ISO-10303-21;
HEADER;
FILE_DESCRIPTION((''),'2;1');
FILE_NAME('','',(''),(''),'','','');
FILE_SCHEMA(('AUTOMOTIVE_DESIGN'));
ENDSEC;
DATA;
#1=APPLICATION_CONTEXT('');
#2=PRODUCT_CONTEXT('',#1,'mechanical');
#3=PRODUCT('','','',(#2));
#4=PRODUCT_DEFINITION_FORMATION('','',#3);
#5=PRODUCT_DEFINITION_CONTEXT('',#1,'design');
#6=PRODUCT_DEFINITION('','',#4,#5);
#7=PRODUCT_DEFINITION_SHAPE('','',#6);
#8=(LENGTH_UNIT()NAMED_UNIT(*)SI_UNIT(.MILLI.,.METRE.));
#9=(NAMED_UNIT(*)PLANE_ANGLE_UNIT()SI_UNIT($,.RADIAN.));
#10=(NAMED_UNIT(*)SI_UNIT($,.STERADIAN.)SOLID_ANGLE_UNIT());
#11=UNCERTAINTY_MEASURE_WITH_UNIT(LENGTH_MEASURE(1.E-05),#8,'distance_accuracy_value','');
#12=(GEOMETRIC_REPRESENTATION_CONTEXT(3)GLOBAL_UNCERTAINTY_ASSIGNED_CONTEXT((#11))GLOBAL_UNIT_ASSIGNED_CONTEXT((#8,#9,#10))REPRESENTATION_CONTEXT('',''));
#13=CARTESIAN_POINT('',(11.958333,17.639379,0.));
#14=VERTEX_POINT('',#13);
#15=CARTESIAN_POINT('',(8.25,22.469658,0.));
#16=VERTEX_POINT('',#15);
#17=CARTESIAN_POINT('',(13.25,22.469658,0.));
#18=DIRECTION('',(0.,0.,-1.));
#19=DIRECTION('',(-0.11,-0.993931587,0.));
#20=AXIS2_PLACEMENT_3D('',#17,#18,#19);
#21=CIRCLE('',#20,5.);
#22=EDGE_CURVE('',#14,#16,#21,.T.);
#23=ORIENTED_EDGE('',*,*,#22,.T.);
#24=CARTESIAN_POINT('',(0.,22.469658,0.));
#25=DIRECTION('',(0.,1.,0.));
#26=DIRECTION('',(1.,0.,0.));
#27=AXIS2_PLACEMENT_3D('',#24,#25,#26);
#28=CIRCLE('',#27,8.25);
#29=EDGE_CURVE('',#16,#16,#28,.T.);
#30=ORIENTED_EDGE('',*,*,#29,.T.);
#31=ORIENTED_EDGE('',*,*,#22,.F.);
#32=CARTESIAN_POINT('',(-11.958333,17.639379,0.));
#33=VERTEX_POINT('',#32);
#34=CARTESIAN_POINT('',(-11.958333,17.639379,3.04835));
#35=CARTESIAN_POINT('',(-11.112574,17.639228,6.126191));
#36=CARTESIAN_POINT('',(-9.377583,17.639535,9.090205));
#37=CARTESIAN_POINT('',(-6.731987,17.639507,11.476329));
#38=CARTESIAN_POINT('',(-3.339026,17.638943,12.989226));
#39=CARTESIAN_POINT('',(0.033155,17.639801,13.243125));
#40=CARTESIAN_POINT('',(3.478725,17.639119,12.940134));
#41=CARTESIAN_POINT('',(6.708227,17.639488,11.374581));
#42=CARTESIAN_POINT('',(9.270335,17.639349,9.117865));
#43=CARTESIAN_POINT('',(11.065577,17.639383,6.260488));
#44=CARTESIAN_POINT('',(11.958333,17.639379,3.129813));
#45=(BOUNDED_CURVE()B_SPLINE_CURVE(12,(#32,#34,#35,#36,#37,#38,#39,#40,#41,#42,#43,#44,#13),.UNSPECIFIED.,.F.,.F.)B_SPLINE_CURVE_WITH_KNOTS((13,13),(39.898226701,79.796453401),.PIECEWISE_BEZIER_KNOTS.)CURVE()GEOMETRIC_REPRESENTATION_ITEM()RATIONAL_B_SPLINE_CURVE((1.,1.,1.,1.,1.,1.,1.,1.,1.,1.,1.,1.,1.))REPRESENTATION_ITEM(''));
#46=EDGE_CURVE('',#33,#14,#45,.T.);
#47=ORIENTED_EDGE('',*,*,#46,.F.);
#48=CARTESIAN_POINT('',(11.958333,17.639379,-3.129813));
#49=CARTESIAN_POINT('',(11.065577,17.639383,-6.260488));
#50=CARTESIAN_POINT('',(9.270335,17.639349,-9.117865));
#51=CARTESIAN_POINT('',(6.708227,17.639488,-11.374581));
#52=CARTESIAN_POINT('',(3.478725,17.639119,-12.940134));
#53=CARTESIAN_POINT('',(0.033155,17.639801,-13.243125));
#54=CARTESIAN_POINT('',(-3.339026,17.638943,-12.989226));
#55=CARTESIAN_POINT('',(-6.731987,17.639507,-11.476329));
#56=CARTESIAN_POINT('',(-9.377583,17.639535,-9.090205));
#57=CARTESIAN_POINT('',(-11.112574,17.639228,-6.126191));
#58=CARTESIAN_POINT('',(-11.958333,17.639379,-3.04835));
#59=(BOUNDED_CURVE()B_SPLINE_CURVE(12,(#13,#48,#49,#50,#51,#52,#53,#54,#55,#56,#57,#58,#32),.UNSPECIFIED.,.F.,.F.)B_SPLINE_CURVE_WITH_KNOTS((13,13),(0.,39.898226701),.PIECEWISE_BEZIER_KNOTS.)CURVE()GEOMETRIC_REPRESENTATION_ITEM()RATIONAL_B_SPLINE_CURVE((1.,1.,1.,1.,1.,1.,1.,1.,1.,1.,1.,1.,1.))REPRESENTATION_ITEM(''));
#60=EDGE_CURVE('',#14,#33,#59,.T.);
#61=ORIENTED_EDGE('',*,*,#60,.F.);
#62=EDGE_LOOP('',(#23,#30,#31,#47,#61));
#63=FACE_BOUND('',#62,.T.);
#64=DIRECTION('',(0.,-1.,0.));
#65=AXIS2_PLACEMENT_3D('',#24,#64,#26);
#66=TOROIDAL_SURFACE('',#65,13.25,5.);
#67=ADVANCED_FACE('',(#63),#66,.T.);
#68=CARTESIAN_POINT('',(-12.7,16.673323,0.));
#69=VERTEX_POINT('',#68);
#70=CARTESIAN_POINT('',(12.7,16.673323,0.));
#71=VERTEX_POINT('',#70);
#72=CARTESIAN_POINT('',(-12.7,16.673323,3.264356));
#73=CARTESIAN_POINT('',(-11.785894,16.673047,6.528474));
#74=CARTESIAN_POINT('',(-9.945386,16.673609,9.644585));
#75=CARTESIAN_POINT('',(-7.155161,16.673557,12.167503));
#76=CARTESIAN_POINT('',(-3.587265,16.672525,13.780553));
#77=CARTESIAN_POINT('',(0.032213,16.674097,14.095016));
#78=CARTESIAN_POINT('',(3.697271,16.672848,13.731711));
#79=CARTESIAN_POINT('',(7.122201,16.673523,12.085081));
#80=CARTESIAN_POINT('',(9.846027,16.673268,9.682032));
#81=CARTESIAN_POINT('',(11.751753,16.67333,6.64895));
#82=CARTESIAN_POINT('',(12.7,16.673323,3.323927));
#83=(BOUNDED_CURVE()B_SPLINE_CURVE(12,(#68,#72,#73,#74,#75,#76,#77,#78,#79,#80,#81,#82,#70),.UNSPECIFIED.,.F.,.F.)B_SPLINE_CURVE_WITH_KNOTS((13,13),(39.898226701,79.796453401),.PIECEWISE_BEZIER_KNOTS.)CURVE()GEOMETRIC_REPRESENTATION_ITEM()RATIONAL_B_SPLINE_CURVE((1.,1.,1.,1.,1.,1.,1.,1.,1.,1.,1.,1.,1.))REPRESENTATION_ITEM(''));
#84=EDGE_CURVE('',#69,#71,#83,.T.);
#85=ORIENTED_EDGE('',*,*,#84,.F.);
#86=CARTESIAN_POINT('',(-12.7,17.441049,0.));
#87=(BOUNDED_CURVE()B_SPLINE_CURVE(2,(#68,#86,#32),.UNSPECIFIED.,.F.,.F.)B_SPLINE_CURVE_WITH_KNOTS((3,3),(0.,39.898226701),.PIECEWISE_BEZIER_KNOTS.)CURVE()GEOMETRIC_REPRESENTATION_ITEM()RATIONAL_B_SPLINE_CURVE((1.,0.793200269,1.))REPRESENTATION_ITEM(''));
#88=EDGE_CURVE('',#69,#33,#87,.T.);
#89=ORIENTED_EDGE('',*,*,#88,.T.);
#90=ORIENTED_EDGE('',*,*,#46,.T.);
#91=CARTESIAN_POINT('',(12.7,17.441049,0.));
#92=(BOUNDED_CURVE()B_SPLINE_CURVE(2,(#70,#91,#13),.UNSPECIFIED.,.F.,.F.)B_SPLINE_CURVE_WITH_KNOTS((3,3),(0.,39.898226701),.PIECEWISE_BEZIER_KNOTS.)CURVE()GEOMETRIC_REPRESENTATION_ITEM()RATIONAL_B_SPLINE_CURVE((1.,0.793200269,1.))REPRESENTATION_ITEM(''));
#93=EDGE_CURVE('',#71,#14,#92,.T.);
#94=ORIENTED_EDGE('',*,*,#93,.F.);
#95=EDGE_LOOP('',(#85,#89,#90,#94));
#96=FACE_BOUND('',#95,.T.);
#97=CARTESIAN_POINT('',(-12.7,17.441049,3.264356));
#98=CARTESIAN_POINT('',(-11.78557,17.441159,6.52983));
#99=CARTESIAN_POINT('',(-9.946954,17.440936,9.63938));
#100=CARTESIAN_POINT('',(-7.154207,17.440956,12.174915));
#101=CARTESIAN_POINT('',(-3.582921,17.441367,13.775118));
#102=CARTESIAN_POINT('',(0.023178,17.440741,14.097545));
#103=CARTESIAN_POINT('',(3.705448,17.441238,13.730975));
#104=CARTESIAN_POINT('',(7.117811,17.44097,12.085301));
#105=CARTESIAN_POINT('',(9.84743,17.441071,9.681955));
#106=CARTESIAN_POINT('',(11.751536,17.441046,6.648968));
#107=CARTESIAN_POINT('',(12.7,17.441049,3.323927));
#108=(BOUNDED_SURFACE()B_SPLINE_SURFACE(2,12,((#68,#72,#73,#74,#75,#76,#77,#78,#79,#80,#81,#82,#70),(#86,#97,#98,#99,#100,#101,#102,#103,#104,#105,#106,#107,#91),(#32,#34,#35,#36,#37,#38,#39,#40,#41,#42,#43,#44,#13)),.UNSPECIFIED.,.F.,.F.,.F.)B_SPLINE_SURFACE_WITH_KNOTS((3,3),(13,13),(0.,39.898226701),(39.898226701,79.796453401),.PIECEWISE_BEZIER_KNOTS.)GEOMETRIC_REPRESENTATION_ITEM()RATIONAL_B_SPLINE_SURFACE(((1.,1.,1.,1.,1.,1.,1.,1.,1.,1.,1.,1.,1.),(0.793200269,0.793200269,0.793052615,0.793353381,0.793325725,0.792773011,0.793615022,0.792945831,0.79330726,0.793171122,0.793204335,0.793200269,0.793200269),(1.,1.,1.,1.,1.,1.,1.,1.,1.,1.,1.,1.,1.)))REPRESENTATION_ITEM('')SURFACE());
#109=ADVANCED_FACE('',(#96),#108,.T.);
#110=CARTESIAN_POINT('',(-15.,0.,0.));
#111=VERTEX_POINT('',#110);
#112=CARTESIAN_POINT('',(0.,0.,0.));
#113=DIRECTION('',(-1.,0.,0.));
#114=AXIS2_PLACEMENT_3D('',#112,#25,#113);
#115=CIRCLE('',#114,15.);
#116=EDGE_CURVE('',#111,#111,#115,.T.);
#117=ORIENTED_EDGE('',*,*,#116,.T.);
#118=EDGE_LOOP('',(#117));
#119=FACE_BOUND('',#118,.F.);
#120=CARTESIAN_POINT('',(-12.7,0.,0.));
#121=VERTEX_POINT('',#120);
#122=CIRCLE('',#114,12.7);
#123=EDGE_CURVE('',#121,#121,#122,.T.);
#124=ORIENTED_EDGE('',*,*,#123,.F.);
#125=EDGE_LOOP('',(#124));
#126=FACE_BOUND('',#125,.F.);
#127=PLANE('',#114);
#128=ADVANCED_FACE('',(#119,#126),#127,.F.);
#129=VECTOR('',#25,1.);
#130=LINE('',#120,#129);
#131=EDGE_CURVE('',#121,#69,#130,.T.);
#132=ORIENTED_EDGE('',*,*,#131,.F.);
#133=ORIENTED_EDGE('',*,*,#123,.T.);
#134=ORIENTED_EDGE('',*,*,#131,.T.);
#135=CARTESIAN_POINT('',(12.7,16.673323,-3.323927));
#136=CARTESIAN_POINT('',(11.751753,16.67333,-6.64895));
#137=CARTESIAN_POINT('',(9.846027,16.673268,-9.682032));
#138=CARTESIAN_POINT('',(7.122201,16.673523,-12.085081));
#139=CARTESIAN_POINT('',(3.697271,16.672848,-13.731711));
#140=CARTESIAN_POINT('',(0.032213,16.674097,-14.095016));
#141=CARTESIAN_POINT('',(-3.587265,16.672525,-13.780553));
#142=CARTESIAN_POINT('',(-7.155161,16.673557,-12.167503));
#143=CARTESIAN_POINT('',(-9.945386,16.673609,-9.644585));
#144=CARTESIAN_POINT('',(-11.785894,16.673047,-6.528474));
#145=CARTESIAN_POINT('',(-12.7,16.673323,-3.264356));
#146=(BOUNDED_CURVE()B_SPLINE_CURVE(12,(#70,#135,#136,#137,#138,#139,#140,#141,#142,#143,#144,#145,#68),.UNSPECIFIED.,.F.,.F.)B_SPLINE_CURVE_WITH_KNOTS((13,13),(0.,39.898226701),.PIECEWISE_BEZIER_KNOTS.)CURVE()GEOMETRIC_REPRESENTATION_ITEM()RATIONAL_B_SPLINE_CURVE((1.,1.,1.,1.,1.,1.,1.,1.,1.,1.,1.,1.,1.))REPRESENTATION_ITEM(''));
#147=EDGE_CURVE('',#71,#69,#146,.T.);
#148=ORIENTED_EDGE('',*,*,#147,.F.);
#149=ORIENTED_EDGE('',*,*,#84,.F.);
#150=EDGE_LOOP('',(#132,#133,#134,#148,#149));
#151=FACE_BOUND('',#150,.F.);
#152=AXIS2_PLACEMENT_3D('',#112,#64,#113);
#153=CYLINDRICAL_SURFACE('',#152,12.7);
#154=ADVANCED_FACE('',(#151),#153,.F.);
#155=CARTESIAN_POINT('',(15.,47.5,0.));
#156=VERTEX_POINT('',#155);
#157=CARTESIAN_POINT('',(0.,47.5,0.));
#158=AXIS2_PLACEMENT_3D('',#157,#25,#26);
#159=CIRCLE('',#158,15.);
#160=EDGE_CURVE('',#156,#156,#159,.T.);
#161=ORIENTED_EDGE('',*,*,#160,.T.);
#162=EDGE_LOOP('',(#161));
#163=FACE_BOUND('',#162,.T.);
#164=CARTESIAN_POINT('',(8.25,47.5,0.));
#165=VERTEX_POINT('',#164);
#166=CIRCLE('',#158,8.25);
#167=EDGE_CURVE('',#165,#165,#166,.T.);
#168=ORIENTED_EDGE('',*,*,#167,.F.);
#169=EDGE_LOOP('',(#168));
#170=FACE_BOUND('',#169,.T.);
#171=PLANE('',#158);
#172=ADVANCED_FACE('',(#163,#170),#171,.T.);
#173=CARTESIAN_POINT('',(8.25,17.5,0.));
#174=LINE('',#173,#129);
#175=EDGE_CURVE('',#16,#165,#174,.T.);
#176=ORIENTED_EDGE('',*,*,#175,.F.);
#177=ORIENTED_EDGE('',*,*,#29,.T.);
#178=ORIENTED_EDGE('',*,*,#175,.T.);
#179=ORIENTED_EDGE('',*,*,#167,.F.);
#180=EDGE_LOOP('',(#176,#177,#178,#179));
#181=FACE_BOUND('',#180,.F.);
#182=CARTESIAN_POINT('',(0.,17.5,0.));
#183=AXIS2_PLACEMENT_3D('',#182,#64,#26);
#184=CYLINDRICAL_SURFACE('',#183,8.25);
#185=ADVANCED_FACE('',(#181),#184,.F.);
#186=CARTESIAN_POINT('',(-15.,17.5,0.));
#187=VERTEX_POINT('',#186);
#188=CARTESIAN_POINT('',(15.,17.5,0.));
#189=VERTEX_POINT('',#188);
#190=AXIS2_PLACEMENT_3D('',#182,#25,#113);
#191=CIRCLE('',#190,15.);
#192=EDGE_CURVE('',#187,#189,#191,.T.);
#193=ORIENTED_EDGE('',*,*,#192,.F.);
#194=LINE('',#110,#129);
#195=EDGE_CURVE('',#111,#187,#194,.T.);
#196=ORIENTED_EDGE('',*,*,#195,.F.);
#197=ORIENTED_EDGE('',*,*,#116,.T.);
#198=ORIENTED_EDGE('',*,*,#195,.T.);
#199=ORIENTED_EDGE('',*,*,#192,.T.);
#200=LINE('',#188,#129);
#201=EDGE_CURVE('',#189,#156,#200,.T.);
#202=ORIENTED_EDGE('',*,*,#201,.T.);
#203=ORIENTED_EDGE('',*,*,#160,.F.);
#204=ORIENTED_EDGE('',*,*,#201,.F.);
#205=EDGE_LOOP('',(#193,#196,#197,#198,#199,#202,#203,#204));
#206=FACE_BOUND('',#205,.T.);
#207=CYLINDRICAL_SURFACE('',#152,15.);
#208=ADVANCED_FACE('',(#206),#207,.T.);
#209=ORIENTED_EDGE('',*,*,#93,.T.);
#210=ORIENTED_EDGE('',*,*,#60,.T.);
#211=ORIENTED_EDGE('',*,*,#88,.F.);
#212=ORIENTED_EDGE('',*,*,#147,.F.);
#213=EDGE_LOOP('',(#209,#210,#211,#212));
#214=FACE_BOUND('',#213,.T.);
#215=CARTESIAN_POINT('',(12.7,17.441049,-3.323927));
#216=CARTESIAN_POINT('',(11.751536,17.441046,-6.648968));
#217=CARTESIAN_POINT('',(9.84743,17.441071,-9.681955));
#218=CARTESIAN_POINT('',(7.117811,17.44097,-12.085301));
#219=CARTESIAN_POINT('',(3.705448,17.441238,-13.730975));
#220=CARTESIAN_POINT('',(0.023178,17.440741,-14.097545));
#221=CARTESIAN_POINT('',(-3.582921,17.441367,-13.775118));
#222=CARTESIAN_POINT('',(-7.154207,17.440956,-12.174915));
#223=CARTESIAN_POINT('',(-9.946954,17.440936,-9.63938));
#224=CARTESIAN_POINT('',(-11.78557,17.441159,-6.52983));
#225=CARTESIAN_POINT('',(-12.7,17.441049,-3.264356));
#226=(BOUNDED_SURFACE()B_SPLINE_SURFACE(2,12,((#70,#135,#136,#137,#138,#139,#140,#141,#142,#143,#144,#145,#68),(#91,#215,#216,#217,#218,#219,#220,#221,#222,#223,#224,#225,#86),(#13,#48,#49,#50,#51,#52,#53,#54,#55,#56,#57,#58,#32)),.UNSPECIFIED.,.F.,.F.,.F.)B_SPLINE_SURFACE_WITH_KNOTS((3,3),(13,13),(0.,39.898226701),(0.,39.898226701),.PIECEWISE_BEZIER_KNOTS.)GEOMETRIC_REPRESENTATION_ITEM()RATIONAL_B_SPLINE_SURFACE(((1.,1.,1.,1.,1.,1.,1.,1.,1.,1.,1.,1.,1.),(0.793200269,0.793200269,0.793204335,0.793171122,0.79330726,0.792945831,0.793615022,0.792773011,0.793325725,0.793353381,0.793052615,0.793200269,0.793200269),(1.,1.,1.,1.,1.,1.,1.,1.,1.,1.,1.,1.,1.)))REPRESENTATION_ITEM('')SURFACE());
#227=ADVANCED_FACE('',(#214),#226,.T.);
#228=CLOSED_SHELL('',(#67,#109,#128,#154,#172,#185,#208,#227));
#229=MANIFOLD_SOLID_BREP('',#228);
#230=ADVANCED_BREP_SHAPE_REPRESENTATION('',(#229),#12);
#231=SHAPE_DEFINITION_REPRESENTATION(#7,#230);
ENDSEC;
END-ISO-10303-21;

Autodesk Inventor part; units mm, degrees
ref_plane "YZ Plane" through (0, 0, 0) normal (1, 0, 0) x (0, 1, 0)
ref_plane "XZ Plane" through (0, 0, 0) normal (0, 1, 0) x (-1, 0, 0)
ref_plane "XY Plane" through (0, 0, 0) normal (0, 0, 1) x (1, 0, 0)
sketch "Эскиз1" plane through (0, 0, 0) normal (0, 1, 0) x (-1, 0, 0)
  circle A0 centre (0, 0) radius 12.7
  circle A1 centre (0, 0) radius 15
  dimension "d0" = 25.4
  dimension "d1" = 30
extrude "Выдавливание1" add sketch "Эскиз1" along normal blind 17.5
sketch "Эскиз3" plane through (0, 17.5, 0) normal (0, 1, 0) x (1, 0, 0)
  circle A0 centre (0, 0) radius 15
  circle A1 centre (0, 0) radius 8.25
  circle A2 centre (0, 0) radius 15 projected
  dimension "d4" = 16.5
  dimension "d9" = 0
extrude "Выдавливание2" add sketch "Эскиз3" along normal blind 30
fillet "Сопряжение1" radius 5 1 edges at (-8.25, 17.5, 0)
fillet "Сопряжение2" radius 1 2 edges at (0, 17.5, -12.7) (0, 17.5, 12.7)
